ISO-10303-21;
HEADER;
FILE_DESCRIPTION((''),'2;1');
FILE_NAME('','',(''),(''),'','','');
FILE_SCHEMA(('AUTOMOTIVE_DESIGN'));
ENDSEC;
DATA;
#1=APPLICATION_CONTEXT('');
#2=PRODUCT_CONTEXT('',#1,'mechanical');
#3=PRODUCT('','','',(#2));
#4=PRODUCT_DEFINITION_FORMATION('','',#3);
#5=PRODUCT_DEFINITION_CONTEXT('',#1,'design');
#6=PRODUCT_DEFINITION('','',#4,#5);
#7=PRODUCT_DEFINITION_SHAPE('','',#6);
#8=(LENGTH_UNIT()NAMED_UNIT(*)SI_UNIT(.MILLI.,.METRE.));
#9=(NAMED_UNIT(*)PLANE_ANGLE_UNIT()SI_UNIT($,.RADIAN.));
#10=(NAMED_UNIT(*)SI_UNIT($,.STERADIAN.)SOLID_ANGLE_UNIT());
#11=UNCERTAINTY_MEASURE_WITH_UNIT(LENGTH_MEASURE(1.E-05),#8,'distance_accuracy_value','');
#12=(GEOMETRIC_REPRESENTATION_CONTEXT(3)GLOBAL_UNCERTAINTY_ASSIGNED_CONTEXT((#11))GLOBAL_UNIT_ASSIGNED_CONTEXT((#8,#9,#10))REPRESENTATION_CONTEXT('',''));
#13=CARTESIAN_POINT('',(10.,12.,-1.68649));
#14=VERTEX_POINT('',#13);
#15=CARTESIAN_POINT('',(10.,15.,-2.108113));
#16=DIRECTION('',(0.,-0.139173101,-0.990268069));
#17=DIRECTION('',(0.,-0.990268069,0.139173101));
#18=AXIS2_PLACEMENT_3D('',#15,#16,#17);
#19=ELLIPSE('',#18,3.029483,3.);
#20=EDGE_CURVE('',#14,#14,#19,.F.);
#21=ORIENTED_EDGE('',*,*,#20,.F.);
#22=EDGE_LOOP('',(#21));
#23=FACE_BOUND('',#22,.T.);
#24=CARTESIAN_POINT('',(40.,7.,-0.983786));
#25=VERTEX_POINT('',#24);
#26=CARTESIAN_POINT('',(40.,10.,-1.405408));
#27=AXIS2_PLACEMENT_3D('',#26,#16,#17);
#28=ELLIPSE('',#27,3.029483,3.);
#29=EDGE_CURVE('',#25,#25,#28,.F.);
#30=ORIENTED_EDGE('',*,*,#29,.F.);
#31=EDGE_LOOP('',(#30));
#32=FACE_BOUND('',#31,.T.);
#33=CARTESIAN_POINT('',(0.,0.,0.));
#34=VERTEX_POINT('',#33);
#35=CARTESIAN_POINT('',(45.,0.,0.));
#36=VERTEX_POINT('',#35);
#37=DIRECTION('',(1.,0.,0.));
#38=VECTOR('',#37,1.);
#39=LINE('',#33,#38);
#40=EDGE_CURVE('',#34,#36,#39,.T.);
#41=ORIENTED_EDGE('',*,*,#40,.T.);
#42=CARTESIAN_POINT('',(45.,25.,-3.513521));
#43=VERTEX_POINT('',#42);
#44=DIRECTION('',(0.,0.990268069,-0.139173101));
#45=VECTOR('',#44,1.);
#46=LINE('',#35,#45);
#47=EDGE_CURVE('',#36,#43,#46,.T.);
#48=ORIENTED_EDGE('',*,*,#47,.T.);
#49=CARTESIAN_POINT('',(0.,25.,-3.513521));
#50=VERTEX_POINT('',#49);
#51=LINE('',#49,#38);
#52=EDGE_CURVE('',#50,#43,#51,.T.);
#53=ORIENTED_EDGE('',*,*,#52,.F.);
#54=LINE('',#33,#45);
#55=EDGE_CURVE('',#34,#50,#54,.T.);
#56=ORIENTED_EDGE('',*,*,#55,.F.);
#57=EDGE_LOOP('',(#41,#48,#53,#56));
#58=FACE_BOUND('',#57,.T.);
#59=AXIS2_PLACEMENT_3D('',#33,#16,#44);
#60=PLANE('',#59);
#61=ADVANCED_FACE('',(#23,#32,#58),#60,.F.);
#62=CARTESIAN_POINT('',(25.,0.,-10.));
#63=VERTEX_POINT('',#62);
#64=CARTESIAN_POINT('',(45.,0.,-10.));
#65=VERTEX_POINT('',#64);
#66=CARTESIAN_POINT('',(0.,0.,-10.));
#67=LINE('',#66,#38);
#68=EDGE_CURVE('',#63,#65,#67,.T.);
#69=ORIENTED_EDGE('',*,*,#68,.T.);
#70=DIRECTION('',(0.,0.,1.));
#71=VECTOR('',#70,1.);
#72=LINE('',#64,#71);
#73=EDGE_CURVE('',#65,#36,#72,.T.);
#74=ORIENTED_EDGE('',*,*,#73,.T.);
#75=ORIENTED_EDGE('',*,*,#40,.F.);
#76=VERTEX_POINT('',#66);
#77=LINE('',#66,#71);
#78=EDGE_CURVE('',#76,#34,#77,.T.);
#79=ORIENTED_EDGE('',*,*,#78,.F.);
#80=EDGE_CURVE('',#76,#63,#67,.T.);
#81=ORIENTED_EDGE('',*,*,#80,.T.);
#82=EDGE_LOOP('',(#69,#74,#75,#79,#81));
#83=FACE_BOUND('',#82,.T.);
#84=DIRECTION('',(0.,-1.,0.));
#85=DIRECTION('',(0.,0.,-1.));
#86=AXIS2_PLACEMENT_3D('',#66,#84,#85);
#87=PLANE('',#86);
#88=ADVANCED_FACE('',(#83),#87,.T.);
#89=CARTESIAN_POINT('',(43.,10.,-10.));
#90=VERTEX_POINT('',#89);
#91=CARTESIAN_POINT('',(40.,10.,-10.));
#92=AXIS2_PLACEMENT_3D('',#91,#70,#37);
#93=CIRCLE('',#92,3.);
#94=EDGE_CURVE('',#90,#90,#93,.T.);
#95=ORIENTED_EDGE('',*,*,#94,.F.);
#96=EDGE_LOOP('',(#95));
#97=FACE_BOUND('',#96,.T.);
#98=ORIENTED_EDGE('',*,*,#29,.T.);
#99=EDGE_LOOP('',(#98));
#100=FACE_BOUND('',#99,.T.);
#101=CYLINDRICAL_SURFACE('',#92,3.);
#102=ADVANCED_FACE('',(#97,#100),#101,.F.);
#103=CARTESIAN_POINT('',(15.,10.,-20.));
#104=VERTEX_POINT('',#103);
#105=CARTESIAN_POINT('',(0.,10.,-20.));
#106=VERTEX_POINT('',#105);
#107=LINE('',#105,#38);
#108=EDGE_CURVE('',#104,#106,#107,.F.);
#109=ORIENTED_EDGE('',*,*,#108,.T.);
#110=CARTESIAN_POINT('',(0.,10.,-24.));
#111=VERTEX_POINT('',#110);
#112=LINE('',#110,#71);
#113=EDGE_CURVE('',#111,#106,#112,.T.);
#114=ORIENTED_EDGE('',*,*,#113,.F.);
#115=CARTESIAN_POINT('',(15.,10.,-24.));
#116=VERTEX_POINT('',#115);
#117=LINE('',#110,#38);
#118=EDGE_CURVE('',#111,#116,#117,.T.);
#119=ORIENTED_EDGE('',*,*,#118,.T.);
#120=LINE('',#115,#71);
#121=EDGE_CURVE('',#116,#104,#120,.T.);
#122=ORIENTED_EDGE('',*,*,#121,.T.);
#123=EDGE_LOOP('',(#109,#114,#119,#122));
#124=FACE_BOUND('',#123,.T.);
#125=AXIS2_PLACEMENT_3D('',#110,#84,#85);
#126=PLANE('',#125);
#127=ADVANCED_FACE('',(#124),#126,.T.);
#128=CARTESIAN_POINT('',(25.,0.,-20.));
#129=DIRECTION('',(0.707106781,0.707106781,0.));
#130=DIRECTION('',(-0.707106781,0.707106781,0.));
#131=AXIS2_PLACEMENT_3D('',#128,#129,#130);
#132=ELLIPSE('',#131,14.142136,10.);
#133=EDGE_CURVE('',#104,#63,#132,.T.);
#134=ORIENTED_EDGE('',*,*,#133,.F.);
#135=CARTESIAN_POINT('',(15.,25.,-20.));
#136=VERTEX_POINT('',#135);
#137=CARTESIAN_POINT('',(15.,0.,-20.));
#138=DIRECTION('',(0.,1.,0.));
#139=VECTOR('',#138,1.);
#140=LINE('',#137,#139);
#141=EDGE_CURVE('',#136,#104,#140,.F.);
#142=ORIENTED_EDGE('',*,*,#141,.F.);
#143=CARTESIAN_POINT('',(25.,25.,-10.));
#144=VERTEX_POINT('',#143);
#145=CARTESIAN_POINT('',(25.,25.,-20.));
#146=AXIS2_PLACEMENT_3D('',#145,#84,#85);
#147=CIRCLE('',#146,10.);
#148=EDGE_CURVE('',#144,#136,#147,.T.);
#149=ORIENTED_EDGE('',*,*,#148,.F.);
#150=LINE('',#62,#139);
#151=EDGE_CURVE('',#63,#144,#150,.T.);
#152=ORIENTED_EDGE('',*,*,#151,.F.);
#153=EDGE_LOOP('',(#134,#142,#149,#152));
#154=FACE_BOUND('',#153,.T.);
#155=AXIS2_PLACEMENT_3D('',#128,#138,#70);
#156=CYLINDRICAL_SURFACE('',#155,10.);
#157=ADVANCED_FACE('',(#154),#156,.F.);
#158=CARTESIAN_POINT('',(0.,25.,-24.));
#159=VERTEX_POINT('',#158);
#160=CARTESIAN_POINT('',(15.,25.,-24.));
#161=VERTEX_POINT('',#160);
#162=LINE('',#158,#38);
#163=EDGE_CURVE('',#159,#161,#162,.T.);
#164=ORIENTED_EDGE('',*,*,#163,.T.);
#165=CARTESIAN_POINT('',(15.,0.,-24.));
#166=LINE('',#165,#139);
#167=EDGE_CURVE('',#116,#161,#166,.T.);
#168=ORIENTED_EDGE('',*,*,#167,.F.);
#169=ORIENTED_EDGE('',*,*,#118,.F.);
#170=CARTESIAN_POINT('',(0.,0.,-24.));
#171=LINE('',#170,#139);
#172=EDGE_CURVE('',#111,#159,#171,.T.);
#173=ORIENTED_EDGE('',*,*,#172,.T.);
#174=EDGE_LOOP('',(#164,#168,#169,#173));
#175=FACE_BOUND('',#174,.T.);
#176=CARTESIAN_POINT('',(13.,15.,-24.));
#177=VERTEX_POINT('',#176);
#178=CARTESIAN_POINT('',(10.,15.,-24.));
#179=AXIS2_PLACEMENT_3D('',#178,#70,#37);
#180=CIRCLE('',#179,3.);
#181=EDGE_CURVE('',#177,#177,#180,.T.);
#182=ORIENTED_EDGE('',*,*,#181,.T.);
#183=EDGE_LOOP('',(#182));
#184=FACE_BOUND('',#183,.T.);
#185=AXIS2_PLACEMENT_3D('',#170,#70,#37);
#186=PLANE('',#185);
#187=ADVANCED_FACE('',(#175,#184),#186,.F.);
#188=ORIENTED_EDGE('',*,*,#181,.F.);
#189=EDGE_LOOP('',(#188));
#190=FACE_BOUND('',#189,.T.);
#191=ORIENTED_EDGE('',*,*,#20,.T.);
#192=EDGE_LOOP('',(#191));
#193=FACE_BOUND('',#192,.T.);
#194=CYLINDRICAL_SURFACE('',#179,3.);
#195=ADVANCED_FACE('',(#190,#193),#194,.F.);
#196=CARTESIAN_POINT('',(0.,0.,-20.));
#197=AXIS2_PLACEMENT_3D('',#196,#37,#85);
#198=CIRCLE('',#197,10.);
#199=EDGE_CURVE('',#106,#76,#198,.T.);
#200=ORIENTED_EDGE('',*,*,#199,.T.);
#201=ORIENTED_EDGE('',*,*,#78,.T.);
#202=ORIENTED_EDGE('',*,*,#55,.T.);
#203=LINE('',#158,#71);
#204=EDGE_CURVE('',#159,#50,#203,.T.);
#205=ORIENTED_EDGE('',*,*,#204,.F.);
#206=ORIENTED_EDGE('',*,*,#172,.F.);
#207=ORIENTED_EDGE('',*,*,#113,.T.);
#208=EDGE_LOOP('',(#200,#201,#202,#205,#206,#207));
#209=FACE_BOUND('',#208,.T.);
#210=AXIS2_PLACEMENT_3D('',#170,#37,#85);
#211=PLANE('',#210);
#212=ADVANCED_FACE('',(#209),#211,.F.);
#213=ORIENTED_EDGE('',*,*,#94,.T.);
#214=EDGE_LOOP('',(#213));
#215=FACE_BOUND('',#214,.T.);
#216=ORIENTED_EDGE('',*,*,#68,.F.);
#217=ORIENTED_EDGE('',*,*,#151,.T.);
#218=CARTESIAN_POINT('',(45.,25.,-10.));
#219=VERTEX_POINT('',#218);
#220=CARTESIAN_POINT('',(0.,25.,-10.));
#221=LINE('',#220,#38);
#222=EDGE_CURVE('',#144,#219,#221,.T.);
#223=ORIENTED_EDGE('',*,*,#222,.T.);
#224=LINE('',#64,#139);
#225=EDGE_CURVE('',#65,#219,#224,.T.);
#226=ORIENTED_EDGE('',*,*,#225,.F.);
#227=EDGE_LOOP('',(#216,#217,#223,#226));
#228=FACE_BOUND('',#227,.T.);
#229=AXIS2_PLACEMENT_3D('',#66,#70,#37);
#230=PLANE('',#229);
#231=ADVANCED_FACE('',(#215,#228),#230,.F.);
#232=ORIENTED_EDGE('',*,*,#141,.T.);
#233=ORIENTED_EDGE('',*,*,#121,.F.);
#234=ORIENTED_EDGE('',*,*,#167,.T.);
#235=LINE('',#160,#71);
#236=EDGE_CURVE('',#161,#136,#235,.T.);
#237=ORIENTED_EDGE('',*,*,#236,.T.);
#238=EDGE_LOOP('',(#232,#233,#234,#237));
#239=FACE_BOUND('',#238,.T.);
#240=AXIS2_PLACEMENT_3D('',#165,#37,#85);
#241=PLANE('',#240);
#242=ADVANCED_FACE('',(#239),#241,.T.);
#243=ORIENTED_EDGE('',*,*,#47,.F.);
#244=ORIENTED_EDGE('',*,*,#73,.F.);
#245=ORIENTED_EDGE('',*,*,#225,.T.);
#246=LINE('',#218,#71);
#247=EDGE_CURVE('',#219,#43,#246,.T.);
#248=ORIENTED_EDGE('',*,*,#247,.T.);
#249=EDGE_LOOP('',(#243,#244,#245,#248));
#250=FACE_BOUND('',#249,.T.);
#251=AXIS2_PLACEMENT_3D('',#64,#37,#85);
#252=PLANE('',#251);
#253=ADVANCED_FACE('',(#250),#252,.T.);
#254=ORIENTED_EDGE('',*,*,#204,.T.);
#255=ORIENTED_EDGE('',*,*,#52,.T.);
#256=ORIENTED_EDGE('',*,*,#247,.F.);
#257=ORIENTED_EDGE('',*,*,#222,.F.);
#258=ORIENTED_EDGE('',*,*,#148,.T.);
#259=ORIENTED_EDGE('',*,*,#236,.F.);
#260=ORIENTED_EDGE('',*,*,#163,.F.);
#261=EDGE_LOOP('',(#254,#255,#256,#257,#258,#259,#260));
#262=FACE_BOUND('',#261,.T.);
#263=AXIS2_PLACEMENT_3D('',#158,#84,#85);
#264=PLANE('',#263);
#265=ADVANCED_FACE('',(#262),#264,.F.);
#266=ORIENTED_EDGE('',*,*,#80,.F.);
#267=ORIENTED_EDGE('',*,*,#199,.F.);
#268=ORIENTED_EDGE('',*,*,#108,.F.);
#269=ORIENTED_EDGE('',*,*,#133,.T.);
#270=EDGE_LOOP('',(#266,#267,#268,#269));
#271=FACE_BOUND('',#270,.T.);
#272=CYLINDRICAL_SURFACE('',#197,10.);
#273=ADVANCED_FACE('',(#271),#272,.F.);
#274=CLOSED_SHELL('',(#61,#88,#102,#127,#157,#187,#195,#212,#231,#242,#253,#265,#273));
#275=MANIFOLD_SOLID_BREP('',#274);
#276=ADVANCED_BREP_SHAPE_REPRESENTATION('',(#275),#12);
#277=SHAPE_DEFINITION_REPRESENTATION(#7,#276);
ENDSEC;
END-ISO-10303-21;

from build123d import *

# Parameters (mm, degrees)
SKETCH1_W           = 15
SKETCH1_H           = 15
SKETCH1_R           = 3
BOSS_EXTRUDE1_DEPTH = 24
SKETCH1_3_W         = 45
SKETCH1_3_H         = 25
SKETCH1_3_R         = 3
BOSS_EXTRUDE2_DEPTH = 10
CUT_EXTRUDE1_DEPTH  = 57.797887285
FILLET2_R           = 10


with BuildPart() as part:
    # Sketch1 → Boss-Extrude1 (new body)
    with BuildSketch(Plane.XY):
        with Locations((7.5, 17.5)):
            Rectangle(SKETCH1_W, SKETCH1_H)
        with Locations((10, 15)):
            Circle(SKETCH1_R, mode=Mode.SUBTRACT)
    extrude(amount=-BOSS_EXTRUDE1_DEPTH)

    # Sketch1<3> → Boss-Extrude2 (add)
    with BuildSketch(Plane.XY):
        with Locations((22.5, 12.5)):
            Rectangle(SKETCH1_3_W, SKETCH1_3_H)
        with Locations((10, 15)):
            Circle(SKETCH1_3_R, mode=Mode.SUBTRACT)
        with Locations((40, 10)):
            Circle(SKETCH1_3_R, mode=Mode.SUBTRACT)
    extrude(amount=-BOSS_EXTRUDE2_DEPTH)

    # Sketch2 → Cut-Extrude1 (cut, through all)
    with BuildSketch(Plane(origin=(45, 0, 0), x_dir=(0, 0, -1), z_dir=(1, 0, 0))):
        Polygon((0, 0), (3.513520868, 25), (0, 25), align=None)
    extrude(amount=-CUT_EXTRUDE1_DEPTH, mode=Mode.SUBTRACT)

    # Fillet2
    fillet2_edges = [part.edges().sort_by_distance(p)[0] for p in [
        (7.5, 10, -10),
        (15, 17.5, -10),
    ]]
    fillet(fillet2_edges, radius=FILLET2_R - 0.0001)  # a hair under: the kernel refuses the full size


solid = part.part
